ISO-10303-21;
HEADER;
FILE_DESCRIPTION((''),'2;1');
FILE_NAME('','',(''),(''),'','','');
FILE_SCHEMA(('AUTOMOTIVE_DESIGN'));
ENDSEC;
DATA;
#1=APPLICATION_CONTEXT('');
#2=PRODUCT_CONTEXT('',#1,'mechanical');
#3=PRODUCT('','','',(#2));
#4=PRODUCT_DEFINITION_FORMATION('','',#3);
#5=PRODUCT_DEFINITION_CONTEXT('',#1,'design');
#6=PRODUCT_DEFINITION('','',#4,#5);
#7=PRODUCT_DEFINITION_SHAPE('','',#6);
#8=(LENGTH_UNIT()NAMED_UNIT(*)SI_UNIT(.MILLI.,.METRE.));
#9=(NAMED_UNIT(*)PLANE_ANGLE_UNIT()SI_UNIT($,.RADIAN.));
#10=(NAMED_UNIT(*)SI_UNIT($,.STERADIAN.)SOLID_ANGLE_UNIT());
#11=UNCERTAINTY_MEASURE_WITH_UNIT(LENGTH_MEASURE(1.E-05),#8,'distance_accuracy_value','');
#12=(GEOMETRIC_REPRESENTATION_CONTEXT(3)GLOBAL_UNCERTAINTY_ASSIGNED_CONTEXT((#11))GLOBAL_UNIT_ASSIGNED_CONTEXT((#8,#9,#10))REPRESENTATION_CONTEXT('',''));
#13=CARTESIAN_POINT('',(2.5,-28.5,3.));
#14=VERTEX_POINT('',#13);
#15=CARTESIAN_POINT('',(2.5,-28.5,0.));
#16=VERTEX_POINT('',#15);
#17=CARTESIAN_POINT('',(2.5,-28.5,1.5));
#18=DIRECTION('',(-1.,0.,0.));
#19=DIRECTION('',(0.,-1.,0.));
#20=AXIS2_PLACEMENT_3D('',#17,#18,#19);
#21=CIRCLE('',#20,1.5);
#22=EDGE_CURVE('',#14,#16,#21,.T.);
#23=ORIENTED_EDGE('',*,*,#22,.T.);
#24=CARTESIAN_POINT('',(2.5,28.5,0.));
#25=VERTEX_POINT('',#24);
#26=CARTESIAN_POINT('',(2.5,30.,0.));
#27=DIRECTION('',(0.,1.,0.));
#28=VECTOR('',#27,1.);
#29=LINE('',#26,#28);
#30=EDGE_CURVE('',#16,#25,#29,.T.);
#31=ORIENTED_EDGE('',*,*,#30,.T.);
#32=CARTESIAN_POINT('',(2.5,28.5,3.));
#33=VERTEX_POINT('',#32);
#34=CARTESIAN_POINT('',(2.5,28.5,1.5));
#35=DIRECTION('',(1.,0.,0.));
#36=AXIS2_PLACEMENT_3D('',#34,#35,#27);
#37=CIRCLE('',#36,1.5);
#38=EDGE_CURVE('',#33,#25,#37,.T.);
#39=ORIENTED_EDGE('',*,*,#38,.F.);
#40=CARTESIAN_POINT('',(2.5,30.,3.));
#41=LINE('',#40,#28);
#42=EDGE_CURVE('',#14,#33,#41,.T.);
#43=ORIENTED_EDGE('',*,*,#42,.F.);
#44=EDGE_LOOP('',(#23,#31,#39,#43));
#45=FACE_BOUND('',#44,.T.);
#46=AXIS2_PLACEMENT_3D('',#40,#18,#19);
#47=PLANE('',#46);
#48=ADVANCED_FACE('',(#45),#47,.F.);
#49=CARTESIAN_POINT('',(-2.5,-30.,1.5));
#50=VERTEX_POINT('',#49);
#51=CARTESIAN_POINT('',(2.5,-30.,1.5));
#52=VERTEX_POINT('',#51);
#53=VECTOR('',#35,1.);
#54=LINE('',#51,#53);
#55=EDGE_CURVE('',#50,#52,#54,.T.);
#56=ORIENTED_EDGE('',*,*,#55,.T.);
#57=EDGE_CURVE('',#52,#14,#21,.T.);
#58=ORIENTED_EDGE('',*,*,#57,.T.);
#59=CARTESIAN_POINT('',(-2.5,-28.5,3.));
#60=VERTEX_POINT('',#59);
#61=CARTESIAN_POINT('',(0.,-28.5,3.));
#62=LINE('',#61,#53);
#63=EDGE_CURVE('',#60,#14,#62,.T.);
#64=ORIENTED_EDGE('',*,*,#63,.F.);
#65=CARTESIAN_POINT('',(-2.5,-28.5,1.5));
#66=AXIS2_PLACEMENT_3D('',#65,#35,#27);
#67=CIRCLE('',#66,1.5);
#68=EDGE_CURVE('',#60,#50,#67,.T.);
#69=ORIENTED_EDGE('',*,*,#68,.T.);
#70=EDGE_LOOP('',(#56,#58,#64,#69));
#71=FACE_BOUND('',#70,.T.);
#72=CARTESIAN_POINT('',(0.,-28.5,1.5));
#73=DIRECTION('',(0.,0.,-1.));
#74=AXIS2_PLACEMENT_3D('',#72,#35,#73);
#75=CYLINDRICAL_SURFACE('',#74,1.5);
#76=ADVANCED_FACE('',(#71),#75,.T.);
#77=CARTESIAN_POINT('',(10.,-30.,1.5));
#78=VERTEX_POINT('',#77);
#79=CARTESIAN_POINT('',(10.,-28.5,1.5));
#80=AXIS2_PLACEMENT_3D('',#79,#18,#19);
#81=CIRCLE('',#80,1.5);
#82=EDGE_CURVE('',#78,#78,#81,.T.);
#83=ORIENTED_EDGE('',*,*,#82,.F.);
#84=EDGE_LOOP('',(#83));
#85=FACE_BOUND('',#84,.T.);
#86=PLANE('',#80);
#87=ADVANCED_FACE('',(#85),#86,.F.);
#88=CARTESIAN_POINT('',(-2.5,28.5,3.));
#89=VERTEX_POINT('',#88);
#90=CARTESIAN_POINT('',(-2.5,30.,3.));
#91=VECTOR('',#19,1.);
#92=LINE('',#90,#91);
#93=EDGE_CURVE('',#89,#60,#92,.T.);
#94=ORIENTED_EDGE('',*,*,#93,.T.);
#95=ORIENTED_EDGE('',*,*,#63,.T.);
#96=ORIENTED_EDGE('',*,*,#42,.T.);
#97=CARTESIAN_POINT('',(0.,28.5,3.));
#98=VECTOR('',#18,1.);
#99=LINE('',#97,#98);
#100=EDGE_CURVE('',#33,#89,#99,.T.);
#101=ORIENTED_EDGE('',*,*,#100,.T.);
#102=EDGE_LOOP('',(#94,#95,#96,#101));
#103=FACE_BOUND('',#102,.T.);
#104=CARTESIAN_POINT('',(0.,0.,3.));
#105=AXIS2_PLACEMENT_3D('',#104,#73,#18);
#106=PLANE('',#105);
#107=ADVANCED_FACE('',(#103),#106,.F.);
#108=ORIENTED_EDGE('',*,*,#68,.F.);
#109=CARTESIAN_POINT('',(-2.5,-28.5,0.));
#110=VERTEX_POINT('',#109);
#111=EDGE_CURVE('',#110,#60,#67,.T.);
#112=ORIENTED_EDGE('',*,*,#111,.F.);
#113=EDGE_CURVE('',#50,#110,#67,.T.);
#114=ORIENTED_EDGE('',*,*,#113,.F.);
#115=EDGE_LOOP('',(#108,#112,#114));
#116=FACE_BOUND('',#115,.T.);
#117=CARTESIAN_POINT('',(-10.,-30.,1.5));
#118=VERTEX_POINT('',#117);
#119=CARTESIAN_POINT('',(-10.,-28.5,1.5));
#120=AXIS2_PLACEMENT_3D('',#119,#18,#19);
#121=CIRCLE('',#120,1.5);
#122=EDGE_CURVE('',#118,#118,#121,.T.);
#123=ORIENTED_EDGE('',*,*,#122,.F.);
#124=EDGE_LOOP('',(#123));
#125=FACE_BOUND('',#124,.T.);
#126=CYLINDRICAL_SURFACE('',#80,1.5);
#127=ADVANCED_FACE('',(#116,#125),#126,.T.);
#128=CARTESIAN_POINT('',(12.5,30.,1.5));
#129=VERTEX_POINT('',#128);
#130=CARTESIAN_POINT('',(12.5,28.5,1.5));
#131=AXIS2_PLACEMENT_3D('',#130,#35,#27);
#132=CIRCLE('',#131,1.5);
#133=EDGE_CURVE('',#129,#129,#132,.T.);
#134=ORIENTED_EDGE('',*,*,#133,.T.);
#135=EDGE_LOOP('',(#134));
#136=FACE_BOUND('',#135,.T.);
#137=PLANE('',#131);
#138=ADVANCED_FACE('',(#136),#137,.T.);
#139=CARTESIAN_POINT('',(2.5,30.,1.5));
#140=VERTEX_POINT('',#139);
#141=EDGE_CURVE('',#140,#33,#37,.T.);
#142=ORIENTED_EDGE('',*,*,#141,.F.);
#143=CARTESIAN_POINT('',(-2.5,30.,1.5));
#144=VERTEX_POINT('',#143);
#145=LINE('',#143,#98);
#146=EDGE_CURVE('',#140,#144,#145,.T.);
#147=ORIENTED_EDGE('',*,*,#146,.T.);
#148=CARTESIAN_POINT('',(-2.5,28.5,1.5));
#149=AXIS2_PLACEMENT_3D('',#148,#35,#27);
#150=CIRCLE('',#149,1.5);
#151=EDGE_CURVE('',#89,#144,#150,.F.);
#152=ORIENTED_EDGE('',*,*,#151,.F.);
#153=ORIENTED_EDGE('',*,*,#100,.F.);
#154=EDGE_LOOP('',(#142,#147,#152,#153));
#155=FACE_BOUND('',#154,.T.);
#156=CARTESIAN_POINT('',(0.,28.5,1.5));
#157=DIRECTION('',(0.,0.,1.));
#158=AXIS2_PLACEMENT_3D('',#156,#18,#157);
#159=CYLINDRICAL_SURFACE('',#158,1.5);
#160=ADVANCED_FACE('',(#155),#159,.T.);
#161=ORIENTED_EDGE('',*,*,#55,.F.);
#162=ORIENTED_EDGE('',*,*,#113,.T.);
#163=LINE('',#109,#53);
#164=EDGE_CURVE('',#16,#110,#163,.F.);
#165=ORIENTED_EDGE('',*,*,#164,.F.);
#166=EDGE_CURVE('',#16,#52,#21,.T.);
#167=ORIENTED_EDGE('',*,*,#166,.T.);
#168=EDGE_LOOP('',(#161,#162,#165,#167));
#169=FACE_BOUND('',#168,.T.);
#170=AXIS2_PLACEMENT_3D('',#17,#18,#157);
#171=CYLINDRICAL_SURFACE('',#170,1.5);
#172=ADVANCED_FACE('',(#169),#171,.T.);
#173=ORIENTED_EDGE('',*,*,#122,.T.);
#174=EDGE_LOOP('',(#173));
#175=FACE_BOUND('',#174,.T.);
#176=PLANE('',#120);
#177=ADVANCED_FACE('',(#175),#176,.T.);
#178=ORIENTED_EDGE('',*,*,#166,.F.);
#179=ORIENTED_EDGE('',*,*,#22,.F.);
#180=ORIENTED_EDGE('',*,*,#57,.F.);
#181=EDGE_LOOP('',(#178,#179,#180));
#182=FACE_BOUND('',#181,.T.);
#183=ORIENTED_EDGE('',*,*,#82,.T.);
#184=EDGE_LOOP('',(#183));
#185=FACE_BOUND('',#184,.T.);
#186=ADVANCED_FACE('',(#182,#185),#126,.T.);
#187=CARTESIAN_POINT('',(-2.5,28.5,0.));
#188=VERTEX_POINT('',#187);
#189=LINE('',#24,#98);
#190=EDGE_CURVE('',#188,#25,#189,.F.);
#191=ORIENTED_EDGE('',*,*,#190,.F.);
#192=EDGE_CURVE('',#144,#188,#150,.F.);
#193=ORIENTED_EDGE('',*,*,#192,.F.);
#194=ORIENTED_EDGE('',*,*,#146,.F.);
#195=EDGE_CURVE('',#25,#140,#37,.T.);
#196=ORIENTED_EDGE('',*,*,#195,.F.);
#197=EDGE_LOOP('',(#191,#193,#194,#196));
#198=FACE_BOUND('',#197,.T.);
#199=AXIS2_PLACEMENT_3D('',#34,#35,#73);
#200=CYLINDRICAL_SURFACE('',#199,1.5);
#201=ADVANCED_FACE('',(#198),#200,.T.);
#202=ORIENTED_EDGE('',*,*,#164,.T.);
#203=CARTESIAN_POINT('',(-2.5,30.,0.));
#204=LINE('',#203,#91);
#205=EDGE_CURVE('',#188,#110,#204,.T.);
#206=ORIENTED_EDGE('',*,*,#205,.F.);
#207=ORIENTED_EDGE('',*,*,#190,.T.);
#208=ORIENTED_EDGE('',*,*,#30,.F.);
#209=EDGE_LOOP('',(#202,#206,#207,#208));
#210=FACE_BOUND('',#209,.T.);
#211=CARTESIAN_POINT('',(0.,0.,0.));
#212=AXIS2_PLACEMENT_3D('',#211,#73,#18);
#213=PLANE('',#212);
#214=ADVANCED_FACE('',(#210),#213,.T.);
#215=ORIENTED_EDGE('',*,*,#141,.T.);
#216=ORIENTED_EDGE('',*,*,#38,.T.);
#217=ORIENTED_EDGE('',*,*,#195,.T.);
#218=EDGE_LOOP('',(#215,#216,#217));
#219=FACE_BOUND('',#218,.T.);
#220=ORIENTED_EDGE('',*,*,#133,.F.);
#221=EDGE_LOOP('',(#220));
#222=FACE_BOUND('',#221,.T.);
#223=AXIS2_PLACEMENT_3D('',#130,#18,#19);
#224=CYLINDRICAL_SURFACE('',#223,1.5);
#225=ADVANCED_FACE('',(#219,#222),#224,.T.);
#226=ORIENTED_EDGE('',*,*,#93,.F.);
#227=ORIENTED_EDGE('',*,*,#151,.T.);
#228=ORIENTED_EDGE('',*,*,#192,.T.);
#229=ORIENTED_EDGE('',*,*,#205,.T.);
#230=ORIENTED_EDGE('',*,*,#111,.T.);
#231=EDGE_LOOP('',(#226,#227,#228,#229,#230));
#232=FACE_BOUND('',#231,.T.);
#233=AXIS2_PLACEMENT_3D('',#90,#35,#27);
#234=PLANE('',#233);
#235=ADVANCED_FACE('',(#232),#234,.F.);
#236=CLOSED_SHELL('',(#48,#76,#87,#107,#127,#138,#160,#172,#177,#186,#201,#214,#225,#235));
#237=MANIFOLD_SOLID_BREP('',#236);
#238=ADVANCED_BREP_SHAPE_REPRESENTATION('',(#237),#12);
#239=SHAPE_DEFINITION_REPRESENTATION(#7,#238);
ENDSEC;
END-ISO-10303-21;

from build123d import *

# Parameters (mm, degrees)
SKETCH1_W                = 5
SKETCH1_H                = 60
BOSS_EXTRUDE1_DEPTH      = 3
SKETCH2_R                = 1.5
BOSS_EXTRUDE2_DEPTH      = 10
FILLET1_R                = 1.5
BOSS_EXTRUDE3_DEPTH      = 10
BOSS_EXTRUDE3_DEPTH_BACK = 10
SKETCH3_R                = 1.5
FILLET2_R                = 1.5


with BuildPart() as part:
    # Sketch1 → Boss-Extrude1 (new body)
    with BuildSketch(Plane.XY):
        Rectangle(SKETCH1_W, SKETCH1_H)
    extrude(amount=BOSS_EXTRUDE1_DEPTH)

    # Sketch2 → Boss-Extrude2 (add)
    with BuildSketch(Plane(origin=(2.5, 0, 0), x_dir=(0, 0, -1), z_dir=(1, 0, 0))):
        with Locations(Location((-1.5, 28.5, 0), (0, 0, 90))):
            Circle(SKETCH2_R)
    extrude(amount=BOSS_EXTRUDE2_DEPTH)

    # Fillet1
    fillet1_edges = [part.edges().sort_by_distance(p)[0] for p in [
        (0, 30, 3),
        (0, 30, 0),
    ]]
    fillet(fillet1_edges, radius=FILLET1_R - 0.0001)  # a hair under: the kernel refuses the full size

    # Sketch3 → Boss-Extrude3 (add, two sides: drawn at the far end of the back side and taken through both)
    with BuildSketch(Plane.ZY.offset(-BOSS_EXTRUDE3_DEPTH_BACK)):
        with Locations(Location((1.5, -28.5, 0), (0, 0, 270))):
            Circle(SKETCH3_R)
    extrude(amount=BOSS_EXTRUDE3_DEPTH + BOSS_EXTRUDE3_DEPTH_BACK)

    # Fillet2
    fillet2_edges = [part.edges().sort_by_distance(p)[0] for p in [
        (0, -30, 3),
        (0, -30, 0),
    ]]
    fillet(fillet2_edges, radius=FILLET2_R - 0.0001)  # a hair under: the kernel refuses the full size


solid = part.part
